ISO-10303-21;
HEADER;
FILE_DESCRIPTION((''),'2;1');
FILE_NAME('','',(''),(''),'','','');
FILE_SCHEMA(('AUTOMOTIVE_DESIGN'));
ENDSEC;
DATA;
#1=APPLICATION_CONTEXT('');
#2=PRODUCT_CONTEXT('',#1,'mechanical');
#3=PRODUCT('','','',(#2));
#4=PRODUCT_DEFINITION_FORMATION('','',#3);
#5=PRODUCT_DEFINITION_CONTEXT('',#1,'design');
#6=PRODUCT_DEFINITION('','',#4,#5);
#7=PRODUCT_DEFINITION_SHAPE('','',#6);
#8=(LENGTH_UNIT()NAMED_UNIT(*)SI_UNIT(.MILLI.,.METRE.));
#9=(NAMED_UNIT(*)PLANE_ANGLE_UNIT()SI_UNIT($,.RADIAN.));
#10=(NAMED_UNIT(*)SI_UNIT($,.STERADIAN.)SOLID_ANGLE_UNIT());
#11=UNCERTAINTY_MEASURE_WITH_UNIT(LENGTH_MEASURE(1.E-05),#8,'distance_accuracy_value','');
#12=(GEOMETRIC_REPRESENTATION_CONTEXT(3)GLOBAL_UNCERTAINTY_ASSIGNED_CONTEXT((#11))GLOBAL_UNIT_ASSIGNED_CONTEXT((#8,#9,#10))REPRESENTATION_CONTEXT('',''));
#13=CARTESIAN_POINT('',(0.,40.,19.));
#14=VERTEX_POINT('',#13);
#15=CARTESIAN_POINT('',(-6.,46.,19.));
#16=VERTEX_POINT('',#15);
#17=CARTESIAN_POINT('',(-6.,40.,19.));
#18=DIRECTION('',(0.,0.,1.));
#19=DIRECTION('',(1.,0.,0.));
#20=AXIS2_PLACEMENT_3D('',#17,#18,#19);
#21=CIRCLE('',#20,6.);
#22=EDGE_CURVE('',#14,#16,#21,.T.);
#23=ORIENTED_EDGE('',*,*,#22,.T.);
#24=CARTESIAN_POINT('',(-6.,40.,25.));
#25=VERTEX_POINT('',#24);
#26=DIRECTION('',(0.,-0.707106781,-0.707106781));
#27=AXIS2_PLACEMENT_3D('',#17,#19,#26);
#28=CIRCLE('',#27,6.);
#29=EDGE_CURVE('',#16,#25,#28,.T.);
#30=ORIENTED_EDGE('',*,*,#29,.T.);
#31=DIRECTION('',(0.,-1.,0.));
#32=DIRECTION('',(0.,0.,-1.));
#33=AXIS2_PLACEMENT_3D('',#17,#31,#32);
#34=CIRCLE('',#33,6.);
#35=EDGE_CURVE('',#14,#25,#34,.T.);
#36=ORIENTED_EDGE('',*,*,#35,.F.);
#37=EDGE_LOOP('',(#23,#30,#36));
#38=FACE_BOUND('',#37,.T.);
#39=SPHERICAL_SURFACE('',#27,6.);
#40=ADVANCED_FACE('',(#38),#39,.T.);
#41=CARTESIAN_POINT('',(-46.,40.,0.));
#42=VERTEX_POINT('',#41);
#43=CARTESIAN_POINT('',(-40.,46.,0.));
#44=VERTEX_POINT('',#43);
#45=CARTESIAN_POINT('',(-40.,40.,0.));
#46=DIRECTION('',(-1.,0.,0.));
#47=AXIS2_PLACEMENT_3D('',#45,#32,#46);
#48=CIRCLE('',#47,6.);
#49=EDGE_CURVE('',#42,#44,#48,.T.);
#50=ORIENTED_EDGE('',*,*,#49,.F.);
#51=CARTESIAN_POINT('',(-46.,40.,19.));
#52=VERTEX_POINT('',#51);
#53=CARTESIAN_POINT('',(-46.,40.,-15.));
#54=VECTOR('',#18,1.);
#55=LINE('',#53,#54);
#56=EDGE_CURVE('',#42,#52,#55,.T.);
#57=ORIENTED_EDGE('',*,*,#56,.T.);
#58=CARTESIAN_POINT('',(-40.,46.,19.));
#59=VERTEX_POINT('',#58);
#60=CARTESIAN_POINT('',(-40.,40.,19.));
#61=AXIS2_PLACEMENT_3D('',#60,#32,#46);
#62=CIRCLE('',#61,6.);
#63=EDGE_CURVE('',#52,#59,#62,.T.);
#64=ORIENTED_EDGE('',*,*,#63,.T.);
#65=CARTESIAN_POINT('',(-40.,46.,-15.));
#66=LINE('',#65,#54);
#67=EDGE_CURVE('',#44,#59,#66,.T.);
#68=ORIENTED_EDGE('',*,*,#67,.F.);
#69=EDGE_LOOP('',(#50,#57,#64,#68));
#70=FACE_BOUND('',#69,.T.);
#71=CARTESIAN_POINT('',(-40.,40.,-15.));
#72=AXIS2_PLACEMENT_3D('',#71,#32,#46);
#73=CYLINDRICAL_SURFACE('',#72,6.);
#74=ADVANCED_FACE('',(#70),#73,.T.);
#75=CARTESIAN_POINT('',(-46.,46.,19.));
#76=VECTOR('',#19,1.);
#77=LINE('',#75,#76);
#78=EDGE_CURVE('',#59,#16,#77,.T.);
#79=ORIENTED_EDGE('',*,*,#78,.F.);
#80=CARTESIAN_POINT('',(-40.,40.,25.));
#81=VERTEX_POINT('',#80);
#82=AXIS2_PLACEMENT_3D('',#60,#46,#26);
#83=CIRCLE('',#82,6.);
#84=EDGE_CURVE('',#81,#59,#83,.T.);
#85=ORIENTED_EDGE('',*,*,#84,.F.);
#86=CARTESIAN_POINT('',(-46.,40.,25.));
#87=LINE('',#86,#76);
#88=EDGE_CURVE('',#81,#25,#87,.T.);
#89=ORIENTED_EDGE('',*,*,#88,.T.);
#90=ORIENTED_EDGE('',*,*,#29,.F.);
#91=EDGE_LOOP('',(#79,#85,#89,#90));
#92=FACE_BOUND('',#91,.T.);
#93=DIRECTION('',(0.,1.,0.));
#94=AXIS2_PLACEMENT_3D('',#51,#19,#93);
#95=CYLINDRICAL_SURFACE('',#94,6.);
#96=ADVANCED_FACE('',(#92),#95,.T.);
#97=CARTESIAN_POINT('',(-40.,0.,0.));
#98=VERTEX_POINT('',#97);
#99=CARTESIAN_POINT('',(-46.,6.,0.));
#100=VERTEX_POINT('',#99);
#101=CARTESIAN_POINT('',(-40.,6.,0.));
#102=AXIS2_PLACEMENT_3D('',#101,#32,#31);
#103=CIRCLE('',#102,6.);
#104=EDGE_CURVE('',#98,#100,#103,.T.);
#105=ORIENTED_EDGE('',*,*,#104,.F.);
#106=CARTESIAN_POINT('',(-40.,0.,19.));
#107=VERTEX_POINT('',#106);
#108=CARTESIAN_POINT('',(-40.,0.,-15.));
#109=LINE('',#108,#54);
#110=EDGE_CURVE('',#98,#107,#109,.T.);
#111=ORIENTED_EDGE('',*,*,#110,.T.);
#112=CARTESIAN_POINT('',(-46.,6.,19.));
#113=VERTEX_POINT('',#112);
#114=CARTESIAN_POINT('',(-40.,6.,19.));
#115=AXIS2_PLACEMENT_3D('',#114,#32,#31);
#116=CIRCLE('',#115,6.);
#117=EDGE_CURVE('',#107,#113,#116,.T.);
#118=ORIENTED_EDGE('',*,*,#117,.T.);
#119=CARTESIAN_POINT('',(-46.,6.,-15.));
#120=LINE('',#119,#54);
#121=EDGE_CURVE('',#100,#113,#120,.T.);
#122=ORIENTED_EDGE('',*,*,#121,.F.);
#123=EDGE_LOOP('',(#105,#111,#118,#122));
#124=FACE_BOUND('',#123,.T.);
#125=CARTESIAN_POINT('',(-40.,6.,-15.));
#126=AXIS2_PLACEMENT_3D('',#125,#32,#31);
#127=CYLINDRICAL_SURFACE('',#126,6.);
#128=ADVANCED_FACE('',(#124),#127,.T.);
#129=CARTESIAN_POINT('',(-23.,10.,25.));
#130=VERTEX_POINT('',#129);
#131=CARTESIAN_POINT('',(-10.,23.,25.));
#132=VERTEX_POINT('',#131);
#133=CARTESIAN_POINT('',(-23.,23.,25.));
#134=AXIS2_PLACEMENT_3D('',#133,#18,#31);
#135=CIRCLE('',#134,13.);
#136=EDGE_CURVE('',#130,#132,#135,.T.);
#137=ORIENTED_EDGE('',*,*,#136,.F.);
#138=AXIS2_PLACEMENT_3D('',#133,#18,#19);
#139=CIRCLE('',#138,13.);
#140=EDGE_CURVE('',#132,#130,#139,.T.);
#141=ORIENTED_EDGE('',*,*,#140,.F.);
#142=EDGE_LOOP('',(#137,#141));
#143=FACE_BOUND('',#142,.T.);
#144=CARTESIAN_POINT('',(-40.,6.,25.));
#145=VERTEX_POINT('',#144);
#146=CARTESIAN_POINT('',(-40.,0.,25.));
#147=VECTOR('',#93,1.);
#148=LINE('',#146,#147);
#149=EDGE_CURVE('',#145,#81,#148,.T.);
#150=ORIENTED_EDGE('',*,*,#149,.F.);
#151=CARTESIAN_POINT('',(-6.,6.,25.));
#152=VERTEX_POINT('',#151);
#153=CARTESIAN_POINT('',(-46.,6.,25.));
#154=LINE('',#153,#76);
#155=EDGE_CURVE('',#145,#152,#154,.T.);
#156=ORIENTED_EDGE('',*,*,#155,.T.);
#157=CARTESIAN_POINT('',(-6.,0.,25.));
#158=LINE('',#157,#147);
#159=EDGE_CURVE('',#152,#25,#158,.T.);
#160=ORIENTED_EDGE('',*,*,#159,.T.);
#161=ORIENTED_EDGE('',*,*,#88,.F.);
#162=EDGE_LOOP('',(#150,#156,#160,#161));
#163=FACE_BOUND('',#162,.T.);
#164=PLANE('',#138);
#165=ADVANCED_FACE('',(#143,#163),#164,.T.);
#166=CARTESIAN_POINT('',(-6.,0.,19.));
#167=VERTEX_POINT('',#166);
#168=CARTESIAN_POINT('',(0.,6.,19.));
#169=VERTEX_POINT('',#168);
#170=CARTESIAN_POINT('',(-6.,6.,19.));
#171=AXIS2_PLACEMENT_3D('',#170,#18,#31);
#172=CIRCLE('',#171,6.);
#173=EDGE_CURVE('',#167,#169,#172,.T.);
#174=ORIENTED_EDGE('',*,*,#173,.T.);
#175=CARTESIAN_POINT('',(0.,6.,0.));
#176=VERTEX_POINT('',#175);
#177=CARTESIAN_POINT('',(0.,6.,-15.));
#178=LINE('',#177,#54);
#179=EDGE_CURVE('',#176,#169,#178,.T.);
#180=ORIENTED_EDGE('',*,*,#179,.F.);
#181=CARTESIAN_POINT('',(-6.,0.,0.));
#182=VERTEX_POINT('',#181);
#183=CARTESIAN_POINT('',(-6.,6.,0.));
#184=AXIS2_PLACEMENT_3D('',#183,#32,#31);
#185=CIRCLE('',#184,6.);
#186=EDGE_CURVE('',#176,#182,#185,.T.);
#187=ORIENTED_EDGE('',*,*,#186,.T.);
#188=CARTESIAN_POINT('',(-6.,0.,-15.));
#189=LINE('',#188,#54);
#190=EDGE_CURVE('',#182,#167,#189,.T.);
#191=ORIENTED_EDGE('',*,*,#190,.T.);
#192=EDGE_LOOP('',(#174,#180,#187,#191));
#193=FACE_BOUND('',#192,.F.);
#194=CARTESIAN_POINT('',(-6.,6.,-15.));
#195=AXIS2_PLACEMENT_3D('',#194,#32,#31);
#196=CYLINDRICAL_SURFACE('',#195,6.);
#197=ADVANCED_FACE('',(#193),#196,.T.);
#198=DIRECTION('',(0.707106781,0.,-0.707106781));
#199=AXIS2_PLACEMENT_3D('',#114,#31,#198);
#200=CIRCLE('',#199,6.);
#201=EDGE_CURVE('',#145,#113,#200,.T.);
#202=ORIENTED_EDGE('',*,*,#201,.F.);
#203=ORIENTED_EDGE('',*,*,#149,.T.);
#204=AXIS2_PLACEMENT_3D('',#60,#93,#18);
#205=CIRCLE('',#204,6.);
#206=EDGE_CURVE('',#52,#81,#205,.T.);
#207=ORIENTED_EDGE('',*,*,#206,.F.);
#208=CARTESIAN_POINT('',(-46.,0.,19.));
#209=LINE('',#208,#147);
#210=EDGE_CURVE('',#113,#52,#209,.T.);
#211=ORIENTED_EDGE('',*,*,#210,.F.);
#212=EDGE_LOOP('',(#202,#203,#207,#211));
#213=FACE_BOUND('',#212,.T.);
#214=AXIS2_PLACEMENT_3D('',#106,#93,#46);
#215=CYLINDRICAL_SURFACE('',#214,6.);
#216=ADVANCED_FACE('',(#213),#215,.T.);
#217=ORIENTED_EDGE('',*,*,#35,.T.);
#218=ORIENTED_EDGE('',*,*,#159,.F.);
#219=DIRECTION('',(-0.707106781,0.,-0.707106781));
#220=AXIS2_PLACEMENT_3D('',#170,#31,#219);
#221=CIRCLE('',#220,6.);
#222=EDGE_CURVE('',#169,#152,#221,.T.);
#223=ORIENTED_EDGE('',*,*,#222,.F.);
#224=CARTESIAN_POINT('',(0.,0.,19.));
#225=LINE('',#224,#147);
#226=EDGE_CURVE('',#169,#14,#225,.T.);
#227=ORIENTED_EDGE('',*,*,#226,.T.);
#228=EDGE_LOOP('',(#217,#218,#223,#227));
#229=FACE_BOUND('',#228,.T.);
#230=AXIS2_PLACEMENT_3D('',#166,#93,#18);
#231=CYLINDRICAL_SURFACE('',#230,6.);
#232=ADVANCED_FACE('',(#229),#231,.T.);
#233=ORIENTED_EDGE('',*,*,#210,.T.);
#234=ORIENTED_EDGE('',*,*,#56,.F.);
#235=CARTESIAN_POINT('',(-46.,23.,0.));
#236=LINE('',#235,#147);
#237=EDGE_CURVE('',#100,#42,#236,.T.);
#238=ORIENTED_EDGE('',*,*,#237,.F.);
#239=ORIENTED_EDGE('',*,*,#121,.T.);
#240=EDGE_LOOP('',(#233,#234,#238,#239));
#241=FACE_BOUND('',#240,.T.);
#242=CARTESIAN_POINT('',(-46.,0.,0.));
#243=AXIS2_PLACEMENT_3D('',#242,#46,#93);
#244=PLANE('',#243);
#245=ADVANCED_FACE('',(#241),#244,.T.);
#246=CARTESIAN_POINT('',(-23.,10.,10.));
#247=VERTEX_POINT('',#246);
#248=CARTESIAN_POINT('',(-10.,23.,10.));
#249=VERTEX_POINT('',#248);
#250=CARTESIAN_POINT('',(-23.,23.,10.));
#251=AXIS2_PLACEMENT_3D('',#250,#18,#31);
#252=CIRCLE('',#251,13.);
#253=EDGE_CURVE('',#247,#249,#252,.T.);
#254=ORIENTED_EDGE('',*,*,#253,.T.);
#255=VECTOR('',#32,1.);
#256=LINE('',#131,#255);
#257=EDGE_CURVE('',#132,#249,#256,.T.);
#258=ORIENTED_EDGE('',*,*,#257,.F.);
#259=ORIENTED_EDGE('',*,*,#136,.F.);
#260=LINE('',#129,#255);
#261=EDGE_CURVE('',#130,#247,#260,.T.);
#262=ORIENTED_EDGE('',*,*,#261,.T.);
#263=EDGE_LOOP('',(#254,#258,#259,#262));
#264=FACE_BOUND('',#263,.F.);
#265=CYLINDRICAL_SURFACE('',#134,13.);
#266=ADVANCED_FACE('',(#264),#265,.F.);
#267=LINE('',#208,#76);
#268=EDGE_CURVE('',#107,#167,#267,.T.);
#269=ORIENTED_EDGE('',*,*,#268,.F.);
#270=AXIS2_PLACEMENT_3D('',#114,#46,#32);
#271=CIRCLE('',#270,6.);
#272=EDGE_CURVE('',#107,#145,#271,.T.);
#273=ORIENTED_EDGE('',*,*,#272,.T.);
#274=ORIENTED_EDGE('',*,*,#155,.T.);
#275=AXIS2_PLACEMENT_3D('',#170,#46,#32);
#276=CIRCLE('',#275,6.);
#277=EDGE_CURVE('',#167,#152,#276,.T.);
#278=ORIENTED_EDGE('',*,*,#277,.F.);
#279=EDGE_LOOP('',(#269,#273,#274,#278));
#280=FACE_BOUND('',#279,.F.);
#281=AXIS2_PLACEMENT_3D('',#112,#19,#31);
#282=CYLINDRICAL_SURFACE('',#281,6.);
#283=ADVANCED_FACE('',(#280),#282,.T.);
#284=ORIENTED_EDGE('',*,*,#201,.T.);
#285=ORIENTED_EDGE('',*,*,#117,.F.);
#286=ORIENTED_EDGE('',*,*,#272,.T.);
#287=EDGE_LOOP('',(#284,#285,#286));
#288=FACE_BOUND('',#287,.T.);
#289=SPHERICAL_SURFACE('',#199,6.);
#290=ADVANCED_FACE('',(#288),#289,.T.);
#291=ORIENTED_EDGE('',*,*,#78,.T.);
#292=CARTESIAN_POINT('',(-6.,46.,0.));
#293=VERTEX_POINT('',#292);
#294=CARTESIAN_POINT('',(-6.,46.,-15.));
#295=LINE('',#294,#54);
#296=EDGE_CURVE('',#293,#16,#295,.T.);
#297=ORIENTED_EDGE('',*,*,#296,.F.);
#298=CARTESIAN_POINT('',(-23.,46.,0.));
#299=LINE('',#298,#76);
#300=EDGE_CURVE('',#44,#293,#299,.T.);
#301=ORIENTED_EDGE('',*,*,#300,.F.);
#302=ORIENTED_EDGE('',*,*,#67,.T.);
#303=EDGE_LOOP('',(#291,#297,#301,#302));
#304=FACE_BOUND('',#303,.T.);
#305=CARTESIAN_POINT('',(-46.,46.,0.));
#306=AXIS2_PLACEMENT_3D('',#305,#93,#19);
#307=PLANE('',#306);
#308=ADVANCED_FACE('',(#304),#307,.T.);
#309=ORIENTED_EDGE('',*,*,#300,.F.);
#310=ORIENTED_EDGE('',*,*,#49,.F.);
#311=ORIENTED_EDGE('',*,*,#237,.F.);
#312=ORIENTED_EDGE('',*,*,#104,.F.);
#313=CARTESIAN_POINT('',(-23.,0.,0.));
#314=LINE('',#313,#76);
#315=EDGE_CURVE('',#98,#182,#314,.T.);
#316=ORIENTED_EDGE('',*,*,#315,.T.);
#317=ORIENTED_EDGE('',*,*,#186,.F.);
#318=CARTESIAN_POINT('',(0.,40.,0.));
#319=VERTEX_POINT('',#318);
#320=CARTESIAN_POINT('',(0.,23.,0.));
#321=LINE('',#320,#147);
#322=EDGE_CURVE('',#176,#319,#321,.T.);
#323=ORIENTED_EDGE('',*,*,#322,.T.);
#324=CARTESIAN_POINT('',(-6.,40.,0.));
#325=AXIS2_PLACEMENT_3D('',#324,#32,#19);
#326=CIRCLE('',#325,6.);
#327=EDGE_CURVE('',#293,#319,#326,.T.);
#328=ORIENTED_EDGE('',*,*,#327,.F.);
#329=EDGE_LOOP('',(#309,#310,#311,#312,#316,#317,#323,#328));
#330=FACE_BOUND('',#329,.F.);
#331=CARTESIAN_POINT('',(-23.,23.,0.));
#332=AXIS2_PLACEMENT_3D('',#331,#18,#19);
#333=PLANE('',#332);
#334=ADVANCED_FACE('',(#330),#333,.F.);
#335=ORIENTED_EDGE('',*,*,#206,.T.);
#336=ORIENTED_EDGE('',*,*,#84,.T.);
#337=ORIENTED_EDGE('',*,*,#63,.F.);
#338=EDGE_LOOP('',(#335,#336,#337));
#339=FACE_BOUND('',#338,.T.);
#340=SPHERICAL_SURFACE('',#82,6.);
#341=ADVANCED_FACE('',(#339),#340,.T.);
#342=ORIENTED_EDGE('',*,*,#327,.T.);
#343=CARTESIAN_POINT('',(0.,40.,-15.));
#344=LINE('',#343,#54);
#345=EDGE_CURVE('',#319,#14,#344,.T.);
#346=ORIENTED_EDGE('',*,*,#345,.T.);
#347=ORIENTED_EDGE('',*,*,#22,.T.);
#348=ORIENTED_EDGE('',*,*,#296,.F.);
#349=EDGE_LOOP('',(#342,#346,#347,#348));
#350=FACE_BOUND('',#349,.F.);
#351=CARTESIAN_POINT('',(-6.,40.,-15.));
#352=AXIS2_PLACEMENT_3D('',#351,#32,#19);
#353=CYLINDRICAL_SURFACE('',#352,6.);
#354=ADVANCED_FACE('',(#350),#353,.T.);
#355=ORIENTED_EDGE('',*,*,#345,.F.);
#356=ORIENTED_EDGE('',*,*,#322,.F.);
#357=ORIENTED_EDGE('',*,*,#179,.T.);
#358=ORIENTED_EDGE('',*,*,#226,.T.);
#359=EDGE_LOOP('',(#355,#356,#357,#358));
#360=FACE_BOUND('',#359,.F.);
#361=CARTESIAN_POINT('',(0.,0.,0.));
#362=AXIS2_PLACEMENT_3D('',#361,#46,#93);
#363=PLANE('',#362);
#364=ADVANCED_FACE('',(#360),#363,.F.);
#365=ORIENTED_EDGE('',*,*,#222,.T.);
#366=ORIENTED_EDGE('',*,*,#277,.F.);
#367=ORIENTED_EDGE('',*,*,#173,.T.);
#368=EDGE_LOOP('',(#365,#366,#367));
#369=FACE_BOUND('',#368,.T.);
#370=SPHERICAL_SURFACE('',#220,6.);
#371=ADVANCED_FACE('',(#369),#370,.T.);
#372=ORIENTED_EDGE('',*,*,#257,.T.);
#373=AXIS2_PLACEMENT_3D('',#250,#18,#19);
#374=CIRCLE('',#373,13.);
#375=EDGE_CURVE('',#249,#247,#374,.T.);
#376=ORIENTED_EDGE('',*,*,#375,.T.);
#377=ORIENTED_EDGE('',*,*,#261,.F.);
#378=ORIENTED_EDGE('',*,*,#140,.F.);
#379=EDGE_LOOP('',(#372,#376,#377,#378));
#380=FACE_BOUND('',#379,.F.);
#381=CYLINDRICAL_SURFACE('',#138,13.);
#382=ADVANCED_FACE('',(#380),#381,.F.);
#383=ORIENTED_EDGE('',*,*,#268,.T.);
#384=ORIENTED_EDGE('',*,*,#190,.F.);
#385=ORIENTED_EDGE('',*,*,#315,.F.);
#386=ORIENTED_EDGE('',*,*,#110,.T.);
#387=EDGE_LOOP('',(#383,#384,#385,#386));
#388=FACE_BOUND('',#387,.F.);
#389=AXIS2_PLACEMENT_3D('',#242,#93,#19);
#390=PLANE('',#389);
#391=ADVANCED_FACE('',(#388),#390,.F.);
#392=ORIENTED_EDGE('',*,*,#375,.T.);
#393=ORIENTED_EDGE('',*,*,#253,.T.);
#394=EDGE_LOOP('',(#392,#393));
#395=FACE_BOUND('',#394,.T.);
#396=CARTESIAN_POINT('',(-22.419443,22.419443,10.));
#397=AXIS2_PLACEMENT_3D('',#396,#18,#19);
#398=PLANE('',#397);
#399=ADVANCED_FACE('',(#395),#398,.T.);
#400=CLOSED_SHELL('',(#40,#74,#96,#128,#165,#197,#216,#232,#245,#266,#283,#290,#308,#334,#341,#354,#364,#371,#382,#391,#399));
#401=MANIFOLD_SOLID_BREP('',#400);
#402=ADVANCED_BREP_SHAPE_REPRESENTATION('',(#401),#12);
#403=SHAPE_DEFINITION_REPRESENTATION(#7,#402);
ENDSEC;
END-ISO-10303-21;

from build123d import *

# Parameters (mm, degrees)
F0_W         = 46
F0_H         = 46
F1_DEPTH     = 25
F3_DEPTH     = 15
F4_R         = 6
F5_T1_DEPTH  = 34
F5_S5_W      = 6
F5_S5_H      = 6
F5_T6_DEPTH  = 6
F5_S11_W     = 6
F5_S11_H     = 6
F5_T12_DEPTH = 6
F5_S17_W     = 6
F5_S17_H     = 6
F5_T18_DEPTH = 6
F5_S23_W     = 6
F5_S23_H     = 6
F5_T24_DEPTH = 6


# Not quite as in the source:
# - a fillet or chamfer that OpenCascade refuses, or shapes differently, is made with other operations: its cross-section is extruded or revolved along the edge and cut away or added


with BuildPart() as f1:
    # F0 (on Top) → F1 (new body)
    with BuildSketch(Plane.XY):
        with Locations((-23, 23)):
            Rectangle(F0_W, F0_H)
    extrude(amount=F1_DEPTH)

    # F2 (on face) → F3 (cut)
    with BuildSketch(Plane.XY.offset(25)):
        with BuildLine():
            ThreePointArc((-10, 23), (-32.1923881554, 32.1923881554), (-23, 10))
            ThreePointArc((-23, 10), (-13.8076118446, 13.8076118446), (-10, 23))
        make_face()
    extrude(amount=-F3_DEPTH, mode=Mode.SUBTRACT)

    # F4
    f4_edges = [f1.edges().sort_by_distance(p)[0] for p in [
        (-23, 0, 25),
        (-46, 23, 25),
        (0, 23, 25),
        (-23, 46, 25),
    ]]
    fillet(f4_edges, radius=F4_R)

    # F5: fillet of radius 6 on 4 edges, made by hand

    # F5_s2 → F5_t1 (cut)
    with BuildSketch(Plane.XY.offset(-15)):
        with BuildLine():
            ThreePointArc((-40, 0), (-44.2426406871, 1.7573593129), (-46, 6))
            Line((-46, 6), (-46, 0))
            Line((-46, 0), (-40, 0))
        make_face()
        with BuildLine():
            ThreePointArc((-6, 0), (-1.7573593129, 1.7573593129), (0, 6))
            Line((0, 6), (0, 0))
            Line((0, 0), (-6, 0))
        make_face()
        with BuildLine():
            ThreePointArc((0, 40), (-1.7573593129, 44.2426406871), (-6, 46))
            Line((-6, 46), (0, 46))
            Line((0, 46), (0, 40))
        make_face()
        with BuildLine():
            ThreePointArc((-46, 40), (-44.2426406871, 44.2426406871), (-40, 46))
            Line((-40, 46), (-46, 46))
            Line((-46, 46), (-46, 40))
        make_face()
    extrude(amount=F5_T1_DEPTH, mode=Mode.SUBTRACT)


with BuildPart() as f5_tool4:
    # F5_s5 → F5_t6 (new body)
    with BuildSketch(Plane.YZ.offset(-40)):
        with Locations((43, 22)):
            Rectangle(F5_S5_W, F5_S5_H)
    extrude(amount=-F5_T6_DEPTH)

    # F5_s7 → F5_t8 (revolve, cut)
    with BuildSketch(Plane(origin=(-40, 40, 19), x_dir=(0, -0.7071067812, -0.7071067812), z_dir=(0, 0.7071067812, -0.7071067812))):
        with BuildLine():
            ThreePointArc((0, -6), (6, 0), (0, 6))
            Line((0, 6), (0, -6))
        make_face()
    revolve(axis=Axis((-40, 40, 19), (-1, 0, 0)), mode=Mode.SUBTRACT)


with BuildPart() as f1_1:
    add(f1.part)

    # F5_t3: cut F5_tool4
    add(f5_tool4.part, mode=Mode.SUBTRACT)


with BuildPart() as f5_tool10:
    # F5_s11 → F5_t12 (new body)
    with BuildSketch(Plane.YZ.offset(-6)):
        with Locations((43, 22)):
            Rectangle(F5_S11_W, F5_S11_H)
    extrude(amount=F5_T12_DEPTH)

    # F5_s13 → F5_t14 (revolve, cut)
    with BuildSketch(Plane(origin=(-6, 40, 19), x_dir=(0, -0.7071067812, -0.7071067812), z_dir=(0, -0.7071067812, 0.7071067812))):
        with BuildLine():
            ThreePointArc((0, -6), (6, 0), (0, 6))
            Line((0, 6), (0, -6))
        make_face()
    revolve(axis=Axis((-6, 40, 19), (1, 0, 0)), mode=Mode.SUBTRACT)


with BuildPart() as f1_2:
    add(f1_1.part)

    # F5_t9: cut F5_tool10
    add(f5_tool10.part, mode=Mode.SUBTRACT)


with BuildPart() as f5_tool16:
    # F5_s17 → F5_t18 (new body)
    with BuildSketch(Plane.XZ.offset(-6)):
        with Locations((-3, 22)):
            Rectangle(F5_S17_W, F5_S17_H)
    extrude(amount=F5_T18_DEPTH)

    # F5_s19 → F5_t20 (revolve, cut)
    with BuildSketch(Plane(origin=(-6, 6, 19), x_dir=(-0.7071067812, 0, -0.7071067812), z_dir=(-0.7071067812, 0, 0.7071067812))):
        with BuildLine():
            ThreePointArc((0, -6), (6, 0), (0, 6))
            Line((0, 6), (0, -6))
        make_face()
    revolve(axis=Axis((-6, 6, 19), (0, -1, 0)), mode=Mode.SUBTRACT)


with BuildPart() as f1_3:
    add(f1_2.part)

    # F5_t15: cut F5_tool16
    add(f5_tool16.part, mode=Mode.SUBTRACT)


with BuildPart() as f5_tool22:
    # F5_s23 → F5_t24 (new body)
    with BuildSketch(Plane.XZ.offset(-6)):
        with Locations((-43, 22)):
            Rectangle(F5_S23_W, F5_S23_H)
    extrude(amount=F5_T24_DEPTH)

    # F5_s25 → F5_t26 (revolve, cut)
    with BuildSketch(Plane(origin=(-40, 6, 19), x_dir=(0.7071067812, 0, -0.7071067812), z_dir=(-0.7071067812, 0, -0.7071067812))):
        with BuildLine():
            ThreePointArc((0, -6), (6, 0), (0, 6))
            Line((0, 6), (0, -6))
        make_face()
    revolve(axis=Axis((-40, 6, 19), (0, -1, 0)), mode=Mode.SUBTRACT)


with BuildPart() as f1_4:
    add(f1_3.part)

    # F5_t21: cut F5_tool22
    add(f5_tool22.part, mode=Mode.SUBTRACT)


solid = f1_4.part
